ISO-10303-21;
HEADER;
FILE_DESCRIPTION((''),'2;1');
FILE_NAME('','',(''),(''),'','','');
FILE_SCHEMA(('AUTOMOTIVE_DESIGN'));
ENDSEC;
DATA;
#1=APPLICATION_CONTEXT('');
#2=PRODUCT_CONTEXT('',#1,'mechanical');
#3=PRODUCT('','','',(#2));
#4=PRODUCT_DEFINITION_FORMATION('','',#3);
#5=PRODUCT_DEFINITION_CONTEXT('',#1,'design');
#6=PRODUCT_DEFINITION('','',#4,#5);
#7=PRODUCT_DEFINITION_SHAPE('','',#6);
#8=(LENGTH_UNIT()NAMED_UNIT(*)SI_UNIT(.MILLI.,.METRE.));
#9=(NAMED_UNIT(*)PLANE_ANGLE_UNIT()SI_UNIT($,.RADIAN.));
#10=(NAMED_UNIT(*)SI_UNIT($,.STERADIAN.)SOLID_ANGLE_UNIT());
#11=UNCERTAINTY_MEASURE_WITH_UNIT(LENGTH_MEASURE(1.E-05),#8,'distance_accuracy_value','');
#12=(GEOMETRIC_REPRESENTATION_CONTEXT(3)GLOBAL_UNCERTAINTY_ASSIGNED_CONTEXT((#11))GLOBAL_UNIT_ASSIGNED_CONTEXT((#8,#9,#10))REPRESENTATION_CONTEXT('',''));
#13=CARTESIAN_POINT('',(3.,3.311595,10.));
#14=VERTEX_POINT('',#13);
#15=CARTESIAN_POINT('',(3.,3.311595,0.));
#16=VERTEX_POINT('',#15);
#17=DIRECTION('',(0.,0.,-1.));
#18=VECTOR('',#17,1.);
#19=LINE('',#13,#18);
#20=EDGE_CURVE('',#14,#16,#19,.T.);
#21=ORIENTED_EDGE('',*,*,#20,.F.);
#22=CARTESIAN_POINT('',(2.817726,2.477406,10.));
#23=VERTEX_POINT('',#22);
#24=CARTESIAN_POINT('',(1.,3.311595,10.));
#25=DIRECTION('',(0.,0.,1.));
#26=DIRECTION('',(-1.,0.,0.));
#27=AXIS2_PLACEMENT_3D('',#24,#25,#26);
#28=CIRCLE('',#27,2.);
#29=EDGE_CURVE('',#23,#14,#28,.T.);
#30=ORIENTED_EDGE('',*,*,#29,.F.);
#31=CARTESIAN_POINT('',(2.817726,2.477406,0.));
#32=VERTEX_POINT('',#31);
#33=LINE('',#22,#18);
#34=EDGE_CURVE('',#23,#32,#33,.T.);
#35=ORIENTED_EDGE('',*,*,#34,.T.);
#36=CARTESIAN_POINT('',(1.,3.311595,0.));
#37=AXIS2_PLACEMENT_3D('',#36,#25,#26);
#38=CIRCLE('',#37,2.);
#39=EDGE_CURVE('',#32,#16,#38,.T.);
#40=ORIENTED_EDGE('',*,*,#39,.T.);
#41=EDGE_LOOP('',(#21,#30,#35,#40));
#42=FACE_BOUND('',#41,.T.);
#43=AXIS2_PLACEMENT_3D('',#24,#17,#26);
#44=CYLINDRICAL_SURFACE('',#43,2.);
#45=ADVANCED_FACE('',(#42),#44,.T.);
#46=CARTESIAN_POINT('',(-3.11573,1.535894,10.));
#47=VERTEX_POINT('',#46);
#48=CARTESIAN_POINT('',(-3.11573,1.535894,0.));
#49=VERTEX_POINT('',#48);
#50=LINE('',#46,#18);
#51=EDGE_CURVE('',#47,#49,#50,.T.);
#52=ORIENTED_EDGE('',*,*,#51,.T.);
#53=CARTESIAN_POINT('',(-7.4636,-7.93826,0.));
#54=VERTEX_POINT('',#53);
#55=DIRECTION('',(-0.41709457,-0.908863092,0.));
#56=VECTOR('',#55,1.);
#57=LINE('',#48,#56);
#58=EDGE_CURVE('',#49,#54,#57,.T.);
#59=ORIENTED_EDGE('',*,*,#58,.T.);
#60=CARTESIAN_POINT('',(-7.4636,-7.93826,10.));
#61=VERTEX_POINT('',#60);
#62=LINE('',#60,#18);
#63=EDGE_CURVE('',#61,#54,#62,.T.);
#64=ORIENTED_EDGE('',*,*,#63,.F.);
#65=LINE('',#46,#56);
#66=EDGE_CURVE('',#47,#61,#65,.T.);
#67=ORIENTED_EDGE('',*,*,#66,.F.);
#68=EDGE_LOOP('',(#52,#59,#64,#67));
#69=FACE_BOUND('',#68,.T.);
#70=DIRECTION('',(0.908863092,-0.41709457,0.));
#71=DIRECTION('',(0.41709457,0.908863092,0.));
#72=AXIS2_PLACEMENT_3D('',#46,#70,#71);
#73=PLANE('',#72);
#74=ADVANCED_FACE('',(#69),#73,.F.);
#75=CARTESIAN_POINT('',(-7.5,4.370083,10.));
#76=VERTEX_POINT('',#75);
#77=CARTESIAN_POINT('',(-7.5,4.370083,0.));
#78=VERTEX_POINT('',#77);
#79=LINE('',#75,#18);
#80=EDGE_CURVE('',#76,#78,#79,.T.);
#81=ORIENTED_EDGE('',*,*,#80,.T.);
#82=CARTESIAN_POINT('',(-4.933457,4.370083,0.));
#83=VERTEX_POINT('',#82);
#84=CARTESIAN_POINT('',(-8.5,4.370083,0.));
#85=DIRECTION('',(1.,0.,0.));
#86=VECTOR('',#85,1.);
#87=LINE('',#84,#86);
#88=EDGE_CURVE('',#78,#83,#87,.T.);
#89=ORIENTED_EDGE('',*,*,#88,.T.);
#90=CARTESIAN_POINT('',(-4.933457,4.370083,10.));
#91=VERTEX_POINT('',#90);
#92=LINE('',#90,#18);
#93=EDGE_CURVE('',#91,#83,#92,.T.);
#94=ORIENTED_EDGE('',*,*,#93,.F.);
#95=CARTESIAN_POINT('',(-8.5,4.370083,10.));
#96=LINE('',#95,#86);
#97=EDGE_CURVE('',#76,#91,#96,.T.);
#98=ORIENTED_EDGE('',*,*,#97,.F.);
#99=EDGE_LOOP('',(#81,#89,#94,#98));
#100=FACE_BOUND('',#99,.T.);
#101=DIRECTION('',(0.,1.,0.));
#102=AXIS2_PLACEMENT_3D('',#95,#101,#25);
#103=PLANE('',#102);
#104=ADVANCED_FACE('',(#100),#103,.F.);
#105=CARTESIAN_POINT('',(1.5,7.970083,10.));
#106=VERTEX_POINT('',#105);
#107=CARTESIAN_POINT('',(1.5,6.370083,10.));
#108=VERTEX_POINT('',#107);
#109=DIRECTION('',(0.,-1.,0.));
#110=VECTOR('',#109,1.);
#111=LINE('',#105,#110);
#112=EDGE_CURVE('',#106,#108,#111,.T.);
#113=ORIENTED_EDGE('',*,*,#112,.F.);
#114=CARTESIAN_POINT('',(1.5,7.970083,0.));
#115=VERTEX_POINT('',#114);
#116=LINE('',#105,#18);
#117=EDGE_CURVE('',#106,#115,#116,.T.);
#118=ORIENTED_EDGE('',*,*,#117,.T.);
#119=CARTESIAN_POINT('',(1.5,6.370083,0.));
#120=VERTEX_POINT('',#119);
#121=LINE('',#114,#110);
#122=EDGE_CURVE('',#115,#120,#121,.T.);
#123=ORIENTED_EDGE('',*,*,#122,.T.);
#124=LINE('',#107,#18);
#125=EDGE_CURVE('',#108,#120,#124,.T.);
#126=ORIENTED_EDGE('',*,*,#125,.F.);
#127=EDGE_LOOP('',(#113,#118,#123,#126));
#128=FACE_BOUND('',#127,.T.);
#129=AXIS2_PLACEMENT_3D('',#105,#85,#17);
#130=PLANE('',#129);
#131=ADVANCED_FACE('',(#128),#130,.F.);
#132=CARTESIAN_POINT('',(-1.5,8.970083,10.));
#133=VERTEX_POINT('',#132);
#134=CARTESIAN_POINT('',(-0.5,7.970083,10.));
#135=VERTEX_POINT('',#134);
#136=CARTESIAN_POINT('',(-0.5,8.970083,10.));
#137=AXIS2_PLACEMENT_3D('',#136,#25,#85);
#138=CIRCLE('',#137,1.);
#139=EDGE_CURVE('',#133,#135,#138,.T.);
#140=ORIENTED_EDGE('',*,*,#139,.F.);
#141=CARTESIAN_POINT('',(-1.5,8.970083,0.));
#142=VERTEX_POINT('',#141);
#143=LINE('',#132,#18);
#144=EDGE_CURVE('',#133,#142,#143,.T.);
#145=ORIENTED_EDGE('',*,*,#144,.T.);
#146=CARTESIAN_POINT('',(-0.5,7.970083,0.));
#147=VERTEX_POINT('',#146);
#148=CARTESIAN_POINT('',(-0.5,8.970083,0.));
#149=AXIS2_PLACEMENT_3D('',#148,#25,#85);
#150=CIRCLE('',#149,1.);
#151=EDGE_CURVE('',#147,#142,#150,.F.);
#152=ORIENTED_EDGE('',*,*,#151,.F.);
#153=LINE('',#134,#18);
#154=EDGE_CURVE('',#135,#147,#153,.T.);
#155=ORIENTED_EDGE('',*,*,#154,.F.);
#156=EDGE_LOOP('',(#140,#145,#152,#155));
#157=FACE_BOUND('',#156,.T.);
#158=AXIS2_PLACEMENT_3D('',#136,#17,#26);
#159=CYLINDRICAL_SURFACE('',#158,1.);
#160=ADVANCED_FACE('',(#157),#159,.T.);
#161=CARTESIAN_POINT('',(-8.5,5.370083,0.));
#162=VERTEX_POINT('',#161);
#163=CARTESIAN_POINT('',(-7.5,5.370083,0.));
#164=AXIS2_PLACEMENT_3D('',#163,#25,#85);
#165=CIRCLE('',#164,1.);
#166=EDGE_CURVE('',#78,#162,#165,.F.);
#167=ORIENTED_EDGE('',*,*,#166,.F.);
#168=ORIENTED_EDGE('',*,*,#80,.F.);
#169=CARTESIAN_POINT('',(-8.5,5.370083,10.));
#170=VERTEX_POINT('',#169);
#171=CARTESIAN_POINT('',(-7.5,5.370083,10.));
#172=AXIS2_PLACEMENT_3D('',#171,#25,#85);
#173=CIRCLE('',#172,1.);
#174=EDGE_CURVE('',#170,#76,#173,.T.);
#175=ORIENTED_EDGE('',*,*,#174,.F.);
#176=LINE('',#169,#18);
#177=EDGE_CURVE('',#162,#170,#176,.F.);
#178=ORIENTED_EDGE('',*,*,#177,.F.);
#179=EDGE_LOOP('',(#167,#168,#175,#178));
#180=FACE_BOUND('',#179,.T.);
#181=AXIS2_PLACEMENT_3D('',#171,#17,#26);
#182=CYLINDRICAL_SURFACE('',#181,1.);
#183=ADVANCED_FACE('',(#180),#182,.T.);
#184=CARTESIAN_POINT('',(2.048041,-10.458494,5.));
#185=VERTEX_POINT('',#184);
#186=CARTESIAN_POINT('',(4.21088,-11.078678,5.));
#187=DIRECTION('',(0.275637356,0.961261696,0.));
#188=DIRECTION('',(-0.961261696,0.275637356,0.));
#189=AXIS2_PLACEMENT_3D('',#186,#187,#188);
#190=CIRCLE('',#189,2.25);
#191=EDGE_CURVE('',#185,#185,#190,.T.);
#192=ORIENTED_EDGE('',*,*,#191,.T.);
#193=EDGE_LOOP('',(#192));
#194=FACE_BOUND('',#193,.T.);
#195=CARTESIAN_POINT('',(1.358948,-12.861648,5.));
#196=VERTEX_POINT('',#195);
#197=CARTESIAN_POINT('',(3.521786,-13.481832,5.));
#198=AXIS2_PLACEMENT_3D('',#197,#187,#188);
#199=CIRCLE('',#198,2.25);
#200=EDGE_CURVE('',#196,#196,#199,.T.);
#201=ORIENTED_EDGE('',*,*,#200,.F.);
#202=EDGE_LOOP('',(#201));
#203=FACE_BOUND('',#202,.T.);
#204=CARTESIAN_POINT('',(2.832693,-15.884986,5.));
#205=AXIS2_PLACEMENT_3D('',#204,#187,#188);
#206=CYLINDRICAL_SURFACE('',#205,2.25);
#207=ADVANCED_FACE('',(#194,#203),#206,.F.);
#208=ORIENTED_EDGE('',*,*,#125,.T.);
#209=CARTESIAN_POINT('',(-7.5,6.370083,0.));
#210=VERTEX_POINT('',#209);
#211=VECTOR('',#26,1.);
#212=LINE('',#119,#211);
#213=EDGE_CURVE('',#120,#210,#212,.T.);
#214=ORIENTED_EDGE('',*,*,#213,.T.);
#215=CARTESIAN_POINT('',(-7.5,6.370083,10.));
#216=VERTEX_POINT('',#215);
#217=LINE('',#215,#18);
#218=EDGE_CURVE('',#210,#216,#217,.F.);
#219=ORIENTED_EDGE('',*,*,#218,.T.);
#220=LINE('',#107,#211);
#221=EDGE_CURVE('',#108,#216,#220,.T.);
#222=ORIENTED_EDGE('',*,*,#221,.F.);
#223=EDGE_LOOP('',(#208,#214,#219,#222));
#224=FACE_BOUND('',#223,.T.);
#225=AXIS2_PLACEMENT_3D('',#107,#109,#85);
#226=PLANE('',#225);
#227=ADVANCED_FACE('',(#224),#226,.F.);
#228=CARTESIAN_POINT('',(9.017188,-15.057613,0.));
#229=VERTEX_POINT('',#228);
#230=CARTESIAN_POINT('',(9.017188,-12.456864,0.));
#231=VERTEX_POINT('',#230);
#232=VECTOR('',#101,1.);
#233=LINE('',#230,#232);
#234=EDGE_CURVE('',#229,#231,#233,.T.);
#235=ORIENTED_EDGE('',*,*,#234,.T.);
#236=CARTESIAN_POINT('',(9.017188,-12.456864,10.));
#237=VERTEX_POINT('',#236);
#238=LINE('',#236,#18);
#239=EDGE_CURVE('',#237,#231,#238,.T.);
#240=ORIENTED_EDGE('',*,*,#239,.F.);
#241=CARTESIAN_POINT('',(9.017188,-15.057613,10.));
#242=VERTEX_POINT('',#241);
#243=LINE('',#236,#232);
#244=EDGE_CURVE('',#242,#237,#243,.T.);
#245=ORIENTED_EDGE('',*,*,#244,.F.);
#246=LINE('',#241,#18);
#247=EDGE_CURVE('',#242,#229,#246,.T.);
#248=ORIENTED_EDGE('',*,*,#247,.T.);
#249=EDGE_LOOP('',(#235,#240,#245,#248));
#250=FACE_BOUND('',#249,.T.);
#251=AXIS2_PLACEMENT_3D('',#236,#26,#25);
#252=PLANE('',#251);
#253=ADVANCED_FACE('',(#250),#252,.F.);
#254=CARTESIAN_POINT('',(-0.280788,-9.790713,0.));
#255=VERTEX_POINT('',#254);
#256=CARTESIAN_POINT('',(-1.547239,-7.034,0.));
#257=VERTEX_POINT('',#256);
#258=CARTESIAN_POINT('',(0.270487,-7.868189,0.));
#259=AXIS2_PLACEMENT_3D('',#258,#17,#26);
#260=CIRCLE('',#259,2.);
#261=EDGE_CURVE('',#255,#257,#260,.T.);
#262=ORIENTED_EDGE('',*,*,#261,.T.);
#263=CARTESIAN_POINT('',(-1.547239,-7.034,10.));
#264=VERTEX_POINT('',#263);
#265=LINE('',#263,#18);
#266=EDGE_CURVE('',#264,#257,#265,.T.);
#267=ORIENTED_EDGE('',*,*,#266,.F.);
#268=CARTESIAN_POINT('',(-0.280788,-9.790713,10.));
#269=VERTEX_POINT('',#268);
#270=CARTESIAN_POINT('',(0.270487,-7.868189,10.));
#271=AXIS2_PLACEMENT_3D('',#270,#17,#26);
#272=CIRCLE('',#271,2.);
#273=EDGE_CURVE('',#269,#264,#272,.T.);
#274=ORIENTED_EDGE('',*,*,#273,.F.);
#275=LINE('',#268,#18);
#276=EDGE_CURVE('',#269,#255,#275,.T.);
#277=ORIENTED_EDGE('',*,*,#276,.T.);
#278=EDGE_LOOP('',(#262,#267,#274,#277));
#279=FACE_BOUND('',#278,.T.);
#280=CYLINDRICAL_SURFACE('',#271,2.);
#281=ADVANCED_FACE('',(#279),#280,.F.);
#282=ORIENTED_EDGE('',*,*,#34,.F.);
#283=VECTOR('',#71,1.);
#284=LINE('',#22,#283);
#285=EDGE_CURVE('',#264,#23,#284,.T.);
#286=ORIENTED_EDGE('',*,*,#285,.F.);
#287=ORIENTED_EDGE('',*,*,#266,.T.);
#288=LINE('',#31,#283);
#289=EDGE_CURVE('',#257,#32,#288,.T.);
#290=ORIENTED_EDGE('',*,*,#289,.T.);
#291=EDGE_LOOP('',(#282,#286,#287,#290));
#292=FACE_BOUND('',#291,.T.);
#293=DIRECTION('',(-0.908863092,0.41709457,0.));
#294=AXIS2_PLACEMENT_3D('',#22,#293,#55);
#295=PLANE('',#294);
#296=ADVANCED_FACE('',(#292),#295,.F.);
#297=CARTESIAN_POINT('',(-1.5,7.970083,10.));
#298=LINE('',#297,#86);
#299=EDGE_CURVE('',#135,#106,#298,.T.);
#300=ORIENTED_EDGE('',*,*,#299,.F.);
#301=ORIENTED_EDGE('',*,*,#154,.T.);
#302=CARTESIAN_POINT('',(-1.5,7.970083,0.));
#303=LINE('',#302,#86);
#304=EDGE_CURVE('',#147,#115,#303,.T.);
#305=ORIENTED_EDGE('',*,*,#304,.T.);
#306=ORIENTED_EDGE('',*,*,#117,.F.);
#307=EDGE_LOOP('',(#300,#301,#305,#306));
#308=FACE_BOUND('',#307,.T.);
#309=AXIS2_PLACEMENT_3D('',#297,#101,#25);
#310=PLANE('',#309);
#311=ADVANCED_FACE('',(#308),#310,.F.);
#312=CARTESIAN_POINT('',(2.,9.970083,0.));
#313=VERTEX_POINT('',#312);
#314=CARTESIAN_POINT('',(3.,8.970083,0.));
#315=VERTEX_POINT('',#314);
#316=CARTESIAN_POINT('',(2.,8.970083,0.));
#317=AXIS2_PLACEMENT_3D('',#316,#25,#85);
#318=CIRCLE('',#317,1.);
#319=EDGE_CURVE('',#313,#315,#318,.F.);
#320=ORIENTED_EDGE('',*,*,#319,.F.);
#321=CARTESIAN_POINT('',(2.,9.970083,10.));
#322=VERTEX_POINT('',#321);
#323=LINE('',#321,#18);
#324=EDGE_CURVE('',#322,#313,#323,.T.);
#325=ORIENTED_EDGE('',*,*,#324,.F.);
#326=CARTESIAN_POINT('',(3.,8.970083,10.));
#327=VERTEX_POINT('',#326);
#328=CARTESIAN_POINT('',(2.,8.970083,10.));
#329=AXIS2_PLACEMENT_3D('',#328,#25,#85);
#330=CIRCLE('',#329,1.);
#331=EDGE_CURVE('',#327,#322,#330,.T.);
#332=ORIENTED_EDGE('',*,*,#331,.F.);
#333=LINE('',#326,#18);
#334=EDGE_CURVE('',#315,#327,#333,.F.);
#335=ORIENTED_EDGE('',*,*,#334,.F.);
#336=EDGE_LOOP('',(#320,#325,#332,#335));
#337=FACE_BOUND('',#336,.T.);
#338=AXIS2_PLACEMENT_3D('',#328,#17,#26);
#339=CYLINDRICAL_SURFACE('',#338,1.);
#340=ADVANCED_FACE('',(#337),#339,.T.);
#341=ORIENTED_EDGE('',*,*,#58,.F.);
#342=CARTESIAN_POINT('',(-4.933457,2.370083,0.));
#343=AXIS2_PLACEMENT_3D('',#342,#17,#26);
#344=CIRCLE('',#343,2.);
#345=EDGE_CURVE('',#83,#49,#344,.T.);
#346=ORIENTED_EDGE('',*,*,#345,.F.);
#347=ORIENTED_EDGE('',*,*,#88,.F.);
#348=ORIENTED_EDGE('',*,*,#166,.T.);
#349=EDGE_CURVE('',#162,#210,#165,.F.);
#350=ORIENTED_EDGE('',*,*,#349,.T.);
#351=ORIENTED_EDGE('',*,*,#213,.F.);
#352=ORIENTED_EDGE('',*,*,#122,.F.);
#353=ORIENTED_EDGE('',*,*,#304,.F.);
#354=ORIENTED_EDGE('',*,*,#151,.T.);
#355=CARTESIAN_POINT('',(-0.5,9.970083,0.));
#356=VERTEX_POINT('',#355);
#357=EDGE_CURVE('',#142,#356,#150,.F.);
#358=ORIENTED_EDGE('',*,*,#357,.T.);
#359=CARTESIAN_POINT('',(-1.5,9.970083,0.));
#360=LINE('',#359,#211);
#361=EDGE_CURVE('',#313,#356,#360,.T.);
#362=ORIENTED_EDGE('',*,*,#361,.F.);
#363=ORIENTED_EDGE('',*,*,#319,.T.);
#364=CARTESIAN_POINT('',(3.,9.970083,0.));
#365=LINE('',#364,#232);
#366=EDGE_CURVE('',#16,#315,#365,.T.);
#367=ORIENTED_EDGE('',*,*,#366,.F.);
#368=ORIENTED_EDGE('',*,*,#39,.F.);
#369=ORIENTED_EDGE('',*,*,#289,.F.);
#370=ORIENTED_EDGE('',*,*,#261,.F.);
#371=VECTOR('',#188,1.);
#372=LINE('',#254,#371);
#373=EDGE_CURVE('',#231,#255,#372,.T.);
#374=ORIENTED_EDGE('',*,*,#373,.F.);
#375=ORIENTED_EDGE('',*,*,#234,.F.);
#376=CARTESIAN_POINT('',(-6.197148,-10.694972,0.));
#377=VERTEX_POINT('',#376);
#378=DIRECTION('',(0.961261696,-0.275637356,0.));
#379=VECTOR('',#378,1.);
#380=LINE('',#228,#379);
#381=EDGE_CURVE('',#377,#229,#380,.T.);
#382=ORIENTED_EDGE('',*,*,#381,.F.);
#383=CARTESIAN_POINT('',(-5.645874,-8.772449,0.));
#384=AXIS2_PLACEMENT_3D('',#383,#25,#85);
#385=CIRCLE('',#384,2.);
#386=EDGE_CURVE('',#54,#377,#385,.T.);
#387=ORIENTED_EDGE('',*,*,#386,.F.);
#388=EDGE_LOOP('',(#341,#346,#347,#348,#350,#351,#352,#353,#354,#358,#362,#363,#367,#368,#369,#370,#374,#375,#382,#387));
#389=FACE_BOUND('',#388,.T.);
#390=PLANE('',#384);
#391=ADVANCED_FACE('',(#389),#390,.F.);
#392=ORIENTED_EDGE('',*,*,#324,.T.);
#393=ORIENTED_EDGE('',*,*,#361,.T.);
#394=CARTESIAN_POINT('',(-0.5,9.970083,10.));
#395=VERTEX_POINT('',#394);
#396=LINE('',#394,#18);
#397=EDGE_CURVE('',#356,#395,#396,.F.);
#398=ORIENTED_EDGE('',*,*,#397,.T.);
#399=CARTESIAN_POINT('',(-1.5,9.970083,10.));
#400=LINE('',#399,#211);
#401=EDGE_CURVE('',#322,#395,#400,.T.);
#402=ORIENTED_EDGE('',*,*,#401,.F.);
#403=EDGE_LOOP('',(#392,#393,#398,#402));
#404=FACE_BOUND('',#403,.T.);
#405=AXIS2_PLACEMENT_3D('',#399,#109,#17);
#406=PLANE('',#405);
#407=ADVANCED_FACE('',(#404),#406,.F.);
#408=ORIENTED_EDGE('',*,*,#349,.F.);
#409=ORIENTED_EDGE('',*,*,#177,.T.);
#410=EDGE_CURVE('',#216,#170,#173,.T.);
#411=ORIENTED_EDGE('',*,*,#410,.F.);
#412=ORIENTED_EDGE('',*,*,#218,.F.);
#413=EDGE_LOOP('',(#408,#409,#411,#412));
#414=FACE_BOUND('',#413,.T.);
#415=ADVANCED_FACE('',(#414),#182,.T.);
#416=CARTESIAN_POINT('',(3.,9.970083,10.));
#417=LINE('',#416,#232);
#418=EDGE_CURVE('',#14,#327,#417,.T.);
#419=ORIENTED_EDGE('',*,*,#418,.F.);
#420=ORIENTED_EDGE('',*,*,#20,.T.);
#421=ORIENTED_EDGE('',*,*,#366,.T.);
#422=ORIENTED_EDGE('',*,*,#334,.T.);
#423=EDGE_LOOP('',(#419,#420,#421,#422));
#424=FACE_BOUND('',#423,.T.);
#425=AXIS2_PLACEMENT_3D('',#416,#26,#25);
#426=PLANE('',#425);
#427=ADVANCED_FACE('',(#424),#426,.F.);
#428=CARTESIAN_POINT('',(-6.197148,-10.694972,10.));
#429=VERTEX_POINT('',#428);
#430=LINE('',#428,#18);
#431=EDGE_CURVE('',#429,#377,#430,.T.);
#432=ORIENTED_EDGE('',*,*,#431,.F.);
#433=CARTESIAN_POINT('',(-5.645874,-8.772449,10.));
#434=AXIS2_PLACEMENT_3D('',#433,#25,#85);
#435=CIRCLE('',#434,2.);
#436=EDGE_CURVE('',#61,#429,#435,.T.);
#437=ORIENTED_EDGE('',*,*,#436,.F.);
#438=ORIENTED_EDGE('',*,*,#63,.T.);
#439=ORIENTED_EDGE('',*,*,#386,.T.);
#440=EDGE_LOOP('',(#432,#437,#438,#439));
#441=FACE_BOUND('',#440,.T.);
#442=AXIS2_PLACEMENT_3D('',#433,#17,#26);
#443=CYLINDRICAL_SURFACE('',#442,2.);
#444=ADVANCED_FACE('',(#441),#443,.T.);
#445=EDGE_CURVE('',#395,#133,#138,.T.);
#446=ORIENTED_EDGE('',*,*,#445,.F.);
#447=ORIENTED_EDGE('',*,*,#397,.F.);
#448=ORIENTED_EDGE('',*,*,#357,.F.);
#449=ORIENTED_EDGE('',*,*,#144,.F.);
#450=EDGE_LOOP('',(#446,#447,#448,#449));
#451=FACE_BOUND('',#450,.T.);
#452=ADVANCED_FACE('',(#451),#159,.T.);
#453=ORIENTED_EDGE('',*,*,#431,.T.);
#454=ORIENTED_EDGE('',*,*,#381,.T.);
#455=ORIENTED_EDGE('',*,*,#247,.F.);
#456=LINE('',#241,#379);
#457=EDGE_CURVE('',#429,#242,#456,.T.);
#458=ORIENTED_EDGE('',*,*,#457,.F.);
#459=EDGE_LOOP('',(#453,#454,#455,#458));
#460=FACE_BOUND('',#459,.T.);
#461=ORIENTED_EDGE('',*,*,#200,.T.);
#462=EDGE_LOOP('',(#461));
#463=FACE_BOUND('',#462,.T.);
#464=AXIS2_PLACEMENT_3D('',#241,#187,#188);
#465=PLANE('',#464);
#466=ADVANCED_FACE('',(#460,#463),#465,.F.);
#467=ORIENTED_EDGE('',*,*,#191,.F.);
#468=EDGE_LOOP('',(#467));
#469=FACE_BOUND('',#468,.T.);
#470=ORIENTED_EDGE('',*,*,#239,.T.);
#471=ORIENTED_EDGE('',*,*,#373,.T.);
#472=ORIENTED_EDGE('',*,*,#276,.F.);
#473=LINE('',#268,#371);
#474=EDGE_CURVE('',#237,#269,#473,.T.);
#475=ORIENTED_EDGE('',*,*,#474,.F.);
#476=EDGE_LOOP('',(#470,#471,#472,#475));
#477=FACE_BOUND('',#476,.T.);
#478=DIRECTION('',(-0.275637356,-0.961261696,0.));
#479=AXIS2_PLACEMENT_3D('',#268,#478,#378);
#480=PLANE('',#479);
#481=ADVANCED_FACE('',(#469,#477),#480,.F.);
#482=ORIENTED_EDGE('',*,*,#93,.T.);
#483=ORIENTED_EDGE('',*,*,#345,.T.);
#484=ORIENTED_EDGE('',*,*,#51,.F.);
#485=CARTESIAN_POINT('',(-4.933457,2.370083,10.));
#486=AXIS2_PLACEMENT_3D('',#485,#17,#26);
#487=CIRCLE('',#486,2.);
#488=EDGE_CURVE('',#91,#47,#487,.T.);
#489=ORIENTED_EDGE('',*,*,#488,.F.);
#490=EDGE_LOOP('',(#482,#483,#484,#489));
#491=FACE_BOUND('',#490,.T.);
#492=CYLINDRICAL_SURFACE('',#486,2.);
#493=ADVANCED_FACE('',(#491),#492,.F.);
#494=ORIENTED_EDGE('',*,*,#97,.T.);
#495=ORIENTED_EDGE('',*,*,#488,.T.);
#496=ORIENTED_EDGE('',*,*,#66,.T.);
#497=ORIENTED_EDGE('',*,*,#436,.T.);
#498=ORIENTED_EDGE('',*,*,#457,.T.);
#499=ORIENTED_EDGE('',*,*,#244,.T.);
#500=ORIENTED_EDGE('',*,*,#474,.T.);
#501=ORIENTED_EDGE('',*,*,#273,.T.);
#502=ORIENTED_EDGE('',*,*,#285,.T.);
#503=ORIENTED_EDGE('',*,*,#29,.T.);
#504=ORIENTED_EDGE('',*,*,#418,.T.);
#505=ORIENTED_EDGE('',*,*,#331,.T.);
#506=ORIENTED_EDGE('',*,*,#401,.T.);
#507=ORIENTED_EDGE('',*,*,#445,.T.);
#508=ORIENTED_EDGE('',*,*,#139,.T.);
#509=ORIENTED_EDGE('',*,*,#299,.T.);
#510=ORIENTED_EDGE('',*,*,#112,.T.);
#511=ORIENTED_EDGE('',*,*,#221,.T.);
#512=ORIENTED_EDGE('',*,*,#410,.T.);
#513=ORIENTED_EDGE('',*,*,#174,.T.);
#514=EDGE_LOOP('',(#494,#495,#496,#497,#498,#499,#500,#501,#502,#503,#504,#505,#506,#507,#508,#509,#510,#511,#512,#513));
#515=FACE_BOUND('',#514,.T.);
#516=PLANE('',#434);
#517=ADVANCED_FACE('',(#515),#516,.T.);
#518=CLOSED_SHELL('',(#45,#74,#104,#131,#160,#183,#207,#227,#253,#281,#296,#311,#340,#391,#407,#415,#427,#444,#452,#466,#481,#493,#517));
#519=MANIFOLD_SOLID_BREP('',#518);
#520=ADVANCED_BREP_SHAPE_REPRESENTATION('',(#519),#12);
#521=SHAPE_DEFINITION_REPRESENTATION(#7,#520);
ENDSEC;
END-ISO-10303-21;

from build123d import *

# Parameters (mm, degrees)
BOSS_EXTRUDE1_DEPTH = 10
FILLET1_R           = 1
SKETCH3_R           = 2.25
CUT_EXTRUDE1_DEPTH  = 5


with BuildPart() as part:
    # Sketch2 → Boss-Extrude1 (new body)
    with BuildSketch(Plane.XY):
        with BuildLine():
            Line((-1.5, 9.9700831), (-1.5, 7.9700831))
            Line((-1.5, 7.9700831), (1.5, 7.9700831))
            Line((1.5, 7.9700831), (1.5, 6.3700831))
            Line((1.5, 6.3700831), (-8.5, 6.3700831))
            Line((-8.5, 6.3700831), (-8.5, 4.3700831))
            Line((-8.5, 4.3700831), (-4.933456572, 4.3700831))
            ThreePointArc((-4.933456572, 4.3700831), (-3.249951556, 3.449810315), (-3.115730388, 1.535893959))
            Line((-3.115730388, 1.535893959), (-7.463599773, -7.938259613))
            ThreePointArc((-7.463599773, -7.938259613), (-7.463263835, -9.607369524), (-6.197148301, -10.694972145))
            Line((-6.197148301, -10.694972145), (9.017188246, -15.057612947))
            Line((9.017188246, -15.057612947), (9.017188246, -12.456864357))
            Line((9.017188246, -12.456864357), (-0.280787764, -9.79071264))
            ThreePointArc((-0.280787764, -9.79071264), (-1.546903298, -8.703110018), (-1.547239236, -7.034000107))
            Line((-1.547239236, -7.034000107), (2.817726184, 2.4774063))
            ThreePointArc((2.817726184, 2.4774063), (2.953900249, 2.884660063), (3, 3.31159544))
            Line((3, 3.31159544), (3, 9.9700831))
            Line((3, 9.9700831), (-1.5, 9.9700831))
        make_face()
    extrude(amount=BOSS_EXTRUDE1_DEPTH)

    # Fillet1
    fillet1_edges = [part.edges().sort_by_distance(p)[0] for p in [
        (-8.5, 6.3700831, 5),
        (-1.5, 7.9700831, 5),
        (-1.5, 9.9700831, 5),
        (3, 9.9700831, 5),
        (-8.5, 4.3700831, 5),
    ]]
    fillet(fillet1_edges, radius=FILLET1_R - 0.0001)  # a hair under: the kernel refuses the full size

    # Sketch3 → Cut-Extrude1 (cut)
    with BuildSketch(Plane(origin=(-2.615476737, -9.121251349, 0), x_dir=(0.9612616959383208, -0.27563735581699245, 0), z_dir=(0.27563735581699245, 0.9612616959383208, 0))):
        with Locations(Location((7.101454819, -5, 0), (0, 0, 180))):
            Circle(SKETCH3_R)
    extrude(amount=-CUT_EXTRUDE1_DEPTH, mode=Mode.SUBTRACT)


solid = part.part
